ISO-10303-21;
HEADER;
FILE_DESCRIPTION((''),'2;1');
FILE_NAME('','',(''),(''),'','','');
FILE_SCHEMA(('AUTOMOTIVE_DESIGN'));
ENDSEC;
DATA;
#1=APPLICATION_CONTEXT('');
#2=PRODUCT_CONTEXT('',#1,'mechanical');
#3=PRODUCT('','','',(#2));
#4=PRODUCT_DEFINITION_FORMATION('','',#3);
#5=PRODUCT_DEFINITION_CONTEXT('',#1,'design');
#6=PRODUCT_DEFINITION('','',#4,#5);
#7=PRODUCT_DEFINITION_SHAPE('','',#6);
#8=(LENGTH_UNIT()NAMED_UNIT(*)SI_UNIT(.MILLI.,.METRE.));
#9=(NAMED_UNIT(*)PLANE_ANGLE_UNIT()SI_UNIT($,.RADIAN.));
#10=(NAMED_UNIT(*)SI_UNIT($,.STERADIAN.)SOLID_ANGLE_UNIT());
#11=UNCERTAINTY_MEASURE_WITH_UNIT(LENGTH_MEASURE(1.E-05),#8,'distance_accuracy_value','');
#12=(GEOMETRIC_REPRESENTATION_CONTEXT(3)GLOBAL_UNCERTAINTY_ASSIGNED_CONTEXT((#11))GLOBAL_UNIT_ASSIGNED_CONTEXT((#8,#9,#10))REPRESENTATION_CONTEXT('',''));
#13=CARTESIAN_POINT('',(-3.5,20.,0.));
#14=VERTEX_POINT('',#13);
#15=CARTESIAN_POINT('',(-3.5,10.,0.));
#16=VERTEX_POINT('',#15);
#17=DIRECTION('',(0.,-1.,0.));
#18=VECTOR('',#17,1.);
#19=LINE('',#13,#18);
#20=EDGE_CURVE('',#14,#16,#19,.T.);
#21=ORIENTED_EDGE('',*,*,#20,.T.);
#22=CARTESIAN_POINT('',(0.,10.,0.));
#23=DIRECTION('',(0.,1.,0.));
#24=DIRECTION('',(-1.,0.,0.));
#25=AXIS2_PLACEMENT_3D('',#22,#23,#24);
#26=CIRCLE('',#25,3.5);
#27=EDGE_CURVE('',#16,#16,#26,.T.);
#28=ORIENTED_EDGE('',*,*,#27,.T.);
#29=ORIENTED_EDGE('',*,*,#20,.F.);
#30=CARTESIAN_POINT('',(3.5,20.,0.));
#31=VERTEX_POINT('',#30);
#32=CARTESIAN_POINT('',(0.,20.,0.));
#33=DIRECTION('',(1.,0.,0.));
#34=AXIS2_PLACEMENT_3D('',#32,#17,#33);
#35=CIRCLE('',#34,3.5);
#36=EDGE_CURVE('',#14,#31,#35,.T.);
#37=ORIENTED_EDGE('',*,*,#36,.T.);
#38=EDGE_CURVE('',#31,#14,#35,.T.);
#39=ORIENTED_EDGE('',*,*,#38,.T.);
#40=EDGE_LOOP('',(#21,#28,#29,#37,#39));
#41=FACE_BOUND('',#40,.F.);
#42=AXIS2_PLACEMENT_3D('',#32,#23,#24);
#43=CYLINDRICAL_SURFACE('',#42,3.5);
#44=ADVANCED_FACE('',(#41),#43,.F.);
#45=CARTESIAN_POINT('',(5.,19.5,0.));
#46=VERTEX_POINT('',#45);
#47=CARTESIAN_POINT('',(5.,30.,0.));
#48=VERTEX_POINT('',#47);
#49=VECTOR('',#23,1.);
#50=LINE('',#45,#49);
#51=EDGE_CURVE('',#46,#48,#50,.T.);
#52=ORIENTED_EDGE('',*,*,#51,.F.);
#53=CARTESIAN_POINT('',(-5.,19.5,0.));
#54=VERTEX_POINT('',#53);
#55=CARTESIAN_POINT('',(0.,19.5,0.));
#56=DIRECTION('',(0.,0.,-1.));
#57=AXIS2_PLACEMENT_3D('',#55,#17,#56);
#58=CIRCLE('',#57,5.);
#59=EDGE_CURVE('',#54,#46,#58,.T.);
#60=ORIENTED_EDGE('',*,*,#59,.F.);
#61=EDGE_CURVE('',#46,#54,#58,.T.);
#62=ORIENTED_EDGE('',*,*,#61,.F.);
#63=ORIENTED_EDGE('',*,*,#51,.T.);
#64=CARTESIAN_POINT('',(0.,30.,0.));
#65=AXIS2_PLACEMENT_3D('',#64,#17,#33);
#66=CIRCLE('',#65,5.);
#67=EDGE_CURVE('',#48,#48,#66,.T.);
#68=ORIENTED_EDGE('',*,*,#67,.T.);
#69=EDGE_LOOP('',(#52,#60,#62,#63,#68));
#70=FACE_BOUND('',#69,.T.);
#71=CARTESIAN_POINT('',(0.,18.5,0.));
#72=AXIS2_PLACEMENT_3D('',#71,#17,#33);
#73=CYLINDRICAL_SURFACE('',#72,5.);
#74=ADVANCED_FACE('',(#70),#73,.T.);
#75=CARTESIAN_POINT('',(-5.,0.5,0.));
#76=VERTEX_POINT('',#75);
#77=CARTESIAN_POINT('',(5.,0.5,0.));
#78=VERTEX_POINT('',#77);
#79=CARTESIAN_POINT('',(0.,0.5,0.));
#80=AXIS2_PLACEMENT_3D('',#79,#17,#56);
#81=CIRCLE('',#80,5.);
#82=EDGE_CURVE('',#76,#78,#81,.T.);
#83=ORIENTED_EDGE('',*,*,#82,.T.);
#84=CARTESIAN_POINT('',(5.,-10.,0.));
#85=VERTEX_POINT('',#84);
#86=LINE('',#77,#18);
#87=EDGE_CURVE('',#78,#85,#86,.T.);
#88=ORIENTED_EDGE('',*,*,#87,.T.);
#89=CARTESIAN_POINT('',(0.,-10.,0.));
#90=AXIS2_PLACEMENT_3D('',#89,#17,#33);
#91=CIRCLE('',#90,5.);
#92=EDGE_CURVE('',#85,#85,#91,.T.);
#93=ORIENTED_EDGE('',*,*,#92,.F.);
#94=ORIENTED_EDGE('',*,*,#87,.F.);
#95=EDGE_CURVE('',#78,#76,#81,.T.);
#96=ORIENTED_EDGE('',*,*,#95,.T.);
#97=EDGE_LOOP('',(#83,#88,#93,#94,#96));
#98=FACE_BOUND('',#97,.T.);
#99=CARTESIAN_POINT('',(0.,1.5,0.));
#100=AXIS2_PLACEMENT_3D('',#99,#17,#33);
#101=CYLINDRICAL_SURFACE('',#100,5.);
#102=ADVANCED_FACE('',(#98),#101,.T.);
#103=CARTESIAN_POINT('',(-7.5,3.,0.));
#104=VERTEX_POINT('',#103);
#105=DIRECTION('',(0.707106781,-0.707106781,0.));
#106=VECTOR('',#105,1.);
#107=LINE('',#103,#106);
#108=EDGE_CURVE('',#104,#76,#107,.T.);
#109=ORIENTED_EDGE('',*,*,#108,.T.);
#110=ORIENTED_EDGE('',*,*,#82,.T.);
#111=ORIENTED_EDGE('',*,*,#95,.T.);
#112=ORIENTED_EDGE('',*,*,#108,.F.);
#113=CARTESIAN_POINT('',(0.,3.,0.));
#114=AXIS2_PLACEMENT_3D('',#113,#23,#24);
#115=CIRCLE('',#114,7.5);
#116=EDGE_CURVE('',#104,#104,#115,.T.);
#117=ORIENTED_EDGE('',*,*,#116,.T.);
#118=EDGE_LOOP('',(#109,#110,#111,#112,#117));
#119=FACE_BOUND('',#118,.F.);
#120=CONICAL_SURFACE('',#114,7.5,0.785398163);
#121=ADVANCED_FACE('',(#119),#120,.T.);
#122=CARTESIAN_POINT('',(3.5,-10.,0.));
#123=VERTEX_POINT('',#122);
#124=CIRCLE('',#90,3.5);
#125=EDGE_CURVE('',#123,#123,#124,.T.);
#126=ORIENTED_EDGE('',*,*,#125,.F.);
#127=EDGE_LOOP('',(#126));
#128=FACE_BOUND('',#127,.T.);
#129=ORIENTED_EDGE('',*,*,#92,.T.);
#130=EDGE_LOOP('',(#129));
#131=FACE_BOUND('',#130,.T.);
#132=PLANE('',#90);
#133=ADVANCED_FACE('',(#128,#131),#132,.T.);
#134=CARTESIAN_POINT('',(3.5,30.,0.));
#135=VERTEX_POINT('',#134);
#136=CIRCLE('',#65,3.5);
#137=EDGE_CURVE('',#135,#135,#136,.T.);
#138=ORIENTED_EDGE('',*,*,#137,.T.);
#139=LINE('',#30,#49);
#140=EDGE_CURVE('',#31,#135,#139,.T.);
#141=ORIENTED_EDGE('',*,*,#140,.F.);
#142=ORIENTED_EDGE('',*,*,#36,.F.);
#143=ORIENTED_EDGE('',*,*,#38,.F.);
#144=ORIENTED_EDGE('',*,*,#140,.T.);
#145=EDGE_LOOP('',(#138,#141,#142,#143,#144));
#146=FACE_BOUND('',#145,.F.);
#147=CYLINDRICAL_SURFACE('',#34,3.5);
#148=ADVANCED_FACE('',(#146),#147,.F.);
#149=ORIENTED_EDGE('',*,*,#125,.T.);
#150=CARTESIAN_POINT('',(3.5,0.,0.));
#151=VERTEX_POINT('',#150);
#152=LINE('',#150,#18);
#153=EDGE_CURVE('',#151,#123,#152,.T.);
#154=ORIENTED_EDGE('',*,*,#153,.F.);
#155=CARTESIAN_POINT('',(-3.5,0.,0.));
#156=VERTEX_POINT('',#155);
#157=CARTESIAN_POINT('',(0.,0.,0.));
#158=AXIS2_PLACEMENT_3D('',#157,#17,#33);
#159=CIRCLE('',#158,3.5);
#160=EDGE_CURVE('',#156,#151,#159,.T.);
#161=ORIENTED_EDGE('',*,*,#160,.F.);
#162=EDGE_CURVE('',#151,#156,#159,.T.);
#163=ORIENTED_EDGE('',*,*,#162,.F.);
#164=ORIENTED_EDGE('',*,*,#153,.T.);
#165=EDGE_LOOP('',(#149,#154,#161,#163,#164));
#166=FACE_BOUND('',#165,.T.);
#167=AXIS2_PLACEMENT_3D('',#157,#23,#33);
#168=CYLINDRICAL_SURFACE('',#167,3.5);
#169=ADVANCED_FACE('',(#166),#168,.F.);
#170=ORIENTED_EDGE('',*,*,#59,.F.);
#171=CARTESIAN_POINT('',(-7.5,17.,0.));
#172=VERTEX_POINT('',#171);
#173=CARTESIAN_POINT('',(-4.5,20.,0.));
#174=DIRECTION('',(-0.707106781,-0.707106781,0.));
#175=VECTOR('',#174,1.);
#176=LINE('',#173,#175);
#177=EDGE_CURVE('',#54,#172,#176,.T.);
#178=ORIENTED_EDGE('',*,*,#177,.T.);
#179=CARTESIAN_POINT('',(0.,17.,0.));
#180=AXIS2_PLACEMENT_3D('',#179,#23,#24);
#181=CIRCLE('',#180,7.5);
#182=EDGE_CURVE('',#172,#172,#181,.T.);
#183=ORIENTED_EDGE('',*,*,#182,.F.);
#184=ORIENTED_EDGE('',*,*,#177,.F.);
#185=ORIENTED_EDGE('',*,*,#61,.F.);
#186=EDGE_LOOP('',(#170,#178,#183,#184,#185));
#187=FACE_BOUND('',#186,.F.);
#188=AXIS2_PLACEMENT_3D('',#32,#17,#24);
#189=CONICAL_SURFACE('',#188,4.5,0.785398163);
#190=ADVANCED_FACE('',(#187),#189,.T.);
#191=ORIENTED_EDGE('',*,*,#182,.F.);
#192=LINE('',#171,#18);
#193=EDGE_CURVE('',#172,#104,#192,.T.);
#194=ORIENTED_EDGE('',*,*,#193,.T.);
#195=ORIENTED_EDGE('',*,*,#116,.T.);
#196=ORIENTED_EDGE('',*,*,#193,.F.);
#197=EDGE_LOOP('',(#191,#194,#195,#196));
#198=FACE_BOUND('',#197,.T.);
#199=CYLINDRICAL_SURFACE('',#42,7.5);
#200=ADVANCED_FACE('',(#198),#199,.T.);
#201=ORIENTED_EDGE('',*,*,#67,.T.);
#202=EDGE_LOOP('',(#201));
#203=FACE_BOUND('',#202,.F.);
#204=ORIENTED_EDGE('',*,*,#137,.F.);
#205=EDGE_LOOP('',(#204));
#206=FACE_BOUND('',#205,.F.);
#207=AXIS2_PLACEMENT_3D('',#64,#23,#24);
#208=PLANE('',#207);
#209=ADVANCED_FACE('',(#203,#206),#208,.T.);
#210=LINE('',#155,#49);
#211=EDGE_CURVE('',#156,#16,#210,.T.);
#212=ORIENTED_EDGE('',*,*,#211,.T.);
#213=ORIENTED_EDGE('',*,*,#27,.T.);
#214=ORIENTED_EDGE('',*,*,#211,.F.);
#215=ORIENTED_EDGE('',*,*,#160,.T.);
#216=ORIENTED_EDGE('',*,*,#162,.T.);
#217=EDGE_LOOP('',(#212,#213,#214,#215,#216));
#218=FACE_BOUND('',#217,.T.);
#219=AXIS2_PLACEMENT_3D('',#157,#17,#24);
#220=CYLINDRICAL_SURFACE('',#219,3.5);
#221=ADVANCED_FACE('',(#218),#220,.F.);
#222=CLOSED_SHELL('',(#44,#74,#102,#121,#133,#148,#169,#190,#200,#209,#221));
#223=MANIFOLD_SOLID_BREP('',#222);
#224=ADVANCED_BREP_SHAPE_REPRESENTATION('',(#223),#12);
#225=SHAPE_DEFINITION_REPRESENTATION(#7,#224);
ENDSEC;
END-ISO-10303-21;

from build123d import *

# Parameters (mm, degrees)
F0_R         = 5
F0_R_2       = 3.5
F1_DEPTH     = 10
F2_R         = 7.5
F2_R_2       = 5
F2_R_3       = 3.5
F3_DEPTH     = 10
F5_S5_R      = 5
F5_T6_DEPTH  = 12
F5_S11_R     = 5
F5_T12_DEPTH = 12


# Not quite as in the source:
# - a fillet or chamfer that OpenCascade refuses, or shapes differently, is made with other operations: its cross-section is extruded or revolved along the edge and cut away or added


with BuildPart() as f1:
    # F0 (on Front) → F1 (new body)
    with BuildSketch(Plane.XZ):
        Circle(F0_R)
        Circle(F0_R_2, mode=Mode.SUBTRACT)
    extrude(amount=F1_DEPTH)

    # F2 (on face) → F3 (join)
    with BuildSketch(Plane(origin=(0, 0, 0), x_dir=(-1, 0, 0), z_dir=(0, 1, 0))):
        Circle(F2_R)
        Circle(F2_R_2, mode=Mode.SUBTRACT)
        Circle(F2_R_2)
        Circle(F2_R_3, mode=Mode.SUBTRACT)
    extrude(amount=F3_DEPTH)

    # F4: F1 across face


with BuildPart() as f1_1:
    add(f1.part)
    add(f1.part.mirror(Plane(origin=(0, 10, 0), x_dir=(-1, 0, 0), z_dir=(0, 1, 0))))

    # F5: chamfer of 3 on 2 edges, made by hand


with BuildPart() as f5_tool2:
    # F5_s3 → F5_t4 (revolve)
    with BuildSketch(Plane.XY):
        Polygon((-4.5, 20), (-7.5, 17), (-7.5, 20), align=None)
    revolve(axis=Axis((0, 20, 0), (0, 1, 0)))

    # F5_s5 → F5_t6 (cut, symmetric)
    with BuildSketch(Plane.XZ.offset(-18.5)):
        Circle(F5_S5_R)
    extrude(amount=F5_T6_DEPTH, both=True, mode=Mode.SUBTRACT)


with BuildPart() as f1_2:
    add(f1_1.part)

    # F5_t1: cut F5_tool2
    add(f5_tool2.part, mode=Mode.SUBTRACT)


with BuildPart() as f5_tool8:
    # F5_s9 → F5_t10 (revolve)
    with BuildSketch(Plane.XY):
        Polygon((-7.5, 3), (-4.5, 0), (-7.5, 0), align=None)
    revolve(axis=Axis((0, 0, 0), (0, 1, 0)))

    # F5_s11 → F5_t12 (cut, symmetric)
    with BuildSketch(Plane.XZ.offset(-1.5)):
        Circle(F5_S11_R)
    extrude(amount=F5_T12_DEPTH, both=True, mode=Mode.SUBTRACT)


with BuildPart() as f1_3:
    add(f1_2.part)

    # F5_t7: cut F5_tool8
    add(f5_tool8.part, mode=Mode.SUBTRACT)


solid = f1_3.part
